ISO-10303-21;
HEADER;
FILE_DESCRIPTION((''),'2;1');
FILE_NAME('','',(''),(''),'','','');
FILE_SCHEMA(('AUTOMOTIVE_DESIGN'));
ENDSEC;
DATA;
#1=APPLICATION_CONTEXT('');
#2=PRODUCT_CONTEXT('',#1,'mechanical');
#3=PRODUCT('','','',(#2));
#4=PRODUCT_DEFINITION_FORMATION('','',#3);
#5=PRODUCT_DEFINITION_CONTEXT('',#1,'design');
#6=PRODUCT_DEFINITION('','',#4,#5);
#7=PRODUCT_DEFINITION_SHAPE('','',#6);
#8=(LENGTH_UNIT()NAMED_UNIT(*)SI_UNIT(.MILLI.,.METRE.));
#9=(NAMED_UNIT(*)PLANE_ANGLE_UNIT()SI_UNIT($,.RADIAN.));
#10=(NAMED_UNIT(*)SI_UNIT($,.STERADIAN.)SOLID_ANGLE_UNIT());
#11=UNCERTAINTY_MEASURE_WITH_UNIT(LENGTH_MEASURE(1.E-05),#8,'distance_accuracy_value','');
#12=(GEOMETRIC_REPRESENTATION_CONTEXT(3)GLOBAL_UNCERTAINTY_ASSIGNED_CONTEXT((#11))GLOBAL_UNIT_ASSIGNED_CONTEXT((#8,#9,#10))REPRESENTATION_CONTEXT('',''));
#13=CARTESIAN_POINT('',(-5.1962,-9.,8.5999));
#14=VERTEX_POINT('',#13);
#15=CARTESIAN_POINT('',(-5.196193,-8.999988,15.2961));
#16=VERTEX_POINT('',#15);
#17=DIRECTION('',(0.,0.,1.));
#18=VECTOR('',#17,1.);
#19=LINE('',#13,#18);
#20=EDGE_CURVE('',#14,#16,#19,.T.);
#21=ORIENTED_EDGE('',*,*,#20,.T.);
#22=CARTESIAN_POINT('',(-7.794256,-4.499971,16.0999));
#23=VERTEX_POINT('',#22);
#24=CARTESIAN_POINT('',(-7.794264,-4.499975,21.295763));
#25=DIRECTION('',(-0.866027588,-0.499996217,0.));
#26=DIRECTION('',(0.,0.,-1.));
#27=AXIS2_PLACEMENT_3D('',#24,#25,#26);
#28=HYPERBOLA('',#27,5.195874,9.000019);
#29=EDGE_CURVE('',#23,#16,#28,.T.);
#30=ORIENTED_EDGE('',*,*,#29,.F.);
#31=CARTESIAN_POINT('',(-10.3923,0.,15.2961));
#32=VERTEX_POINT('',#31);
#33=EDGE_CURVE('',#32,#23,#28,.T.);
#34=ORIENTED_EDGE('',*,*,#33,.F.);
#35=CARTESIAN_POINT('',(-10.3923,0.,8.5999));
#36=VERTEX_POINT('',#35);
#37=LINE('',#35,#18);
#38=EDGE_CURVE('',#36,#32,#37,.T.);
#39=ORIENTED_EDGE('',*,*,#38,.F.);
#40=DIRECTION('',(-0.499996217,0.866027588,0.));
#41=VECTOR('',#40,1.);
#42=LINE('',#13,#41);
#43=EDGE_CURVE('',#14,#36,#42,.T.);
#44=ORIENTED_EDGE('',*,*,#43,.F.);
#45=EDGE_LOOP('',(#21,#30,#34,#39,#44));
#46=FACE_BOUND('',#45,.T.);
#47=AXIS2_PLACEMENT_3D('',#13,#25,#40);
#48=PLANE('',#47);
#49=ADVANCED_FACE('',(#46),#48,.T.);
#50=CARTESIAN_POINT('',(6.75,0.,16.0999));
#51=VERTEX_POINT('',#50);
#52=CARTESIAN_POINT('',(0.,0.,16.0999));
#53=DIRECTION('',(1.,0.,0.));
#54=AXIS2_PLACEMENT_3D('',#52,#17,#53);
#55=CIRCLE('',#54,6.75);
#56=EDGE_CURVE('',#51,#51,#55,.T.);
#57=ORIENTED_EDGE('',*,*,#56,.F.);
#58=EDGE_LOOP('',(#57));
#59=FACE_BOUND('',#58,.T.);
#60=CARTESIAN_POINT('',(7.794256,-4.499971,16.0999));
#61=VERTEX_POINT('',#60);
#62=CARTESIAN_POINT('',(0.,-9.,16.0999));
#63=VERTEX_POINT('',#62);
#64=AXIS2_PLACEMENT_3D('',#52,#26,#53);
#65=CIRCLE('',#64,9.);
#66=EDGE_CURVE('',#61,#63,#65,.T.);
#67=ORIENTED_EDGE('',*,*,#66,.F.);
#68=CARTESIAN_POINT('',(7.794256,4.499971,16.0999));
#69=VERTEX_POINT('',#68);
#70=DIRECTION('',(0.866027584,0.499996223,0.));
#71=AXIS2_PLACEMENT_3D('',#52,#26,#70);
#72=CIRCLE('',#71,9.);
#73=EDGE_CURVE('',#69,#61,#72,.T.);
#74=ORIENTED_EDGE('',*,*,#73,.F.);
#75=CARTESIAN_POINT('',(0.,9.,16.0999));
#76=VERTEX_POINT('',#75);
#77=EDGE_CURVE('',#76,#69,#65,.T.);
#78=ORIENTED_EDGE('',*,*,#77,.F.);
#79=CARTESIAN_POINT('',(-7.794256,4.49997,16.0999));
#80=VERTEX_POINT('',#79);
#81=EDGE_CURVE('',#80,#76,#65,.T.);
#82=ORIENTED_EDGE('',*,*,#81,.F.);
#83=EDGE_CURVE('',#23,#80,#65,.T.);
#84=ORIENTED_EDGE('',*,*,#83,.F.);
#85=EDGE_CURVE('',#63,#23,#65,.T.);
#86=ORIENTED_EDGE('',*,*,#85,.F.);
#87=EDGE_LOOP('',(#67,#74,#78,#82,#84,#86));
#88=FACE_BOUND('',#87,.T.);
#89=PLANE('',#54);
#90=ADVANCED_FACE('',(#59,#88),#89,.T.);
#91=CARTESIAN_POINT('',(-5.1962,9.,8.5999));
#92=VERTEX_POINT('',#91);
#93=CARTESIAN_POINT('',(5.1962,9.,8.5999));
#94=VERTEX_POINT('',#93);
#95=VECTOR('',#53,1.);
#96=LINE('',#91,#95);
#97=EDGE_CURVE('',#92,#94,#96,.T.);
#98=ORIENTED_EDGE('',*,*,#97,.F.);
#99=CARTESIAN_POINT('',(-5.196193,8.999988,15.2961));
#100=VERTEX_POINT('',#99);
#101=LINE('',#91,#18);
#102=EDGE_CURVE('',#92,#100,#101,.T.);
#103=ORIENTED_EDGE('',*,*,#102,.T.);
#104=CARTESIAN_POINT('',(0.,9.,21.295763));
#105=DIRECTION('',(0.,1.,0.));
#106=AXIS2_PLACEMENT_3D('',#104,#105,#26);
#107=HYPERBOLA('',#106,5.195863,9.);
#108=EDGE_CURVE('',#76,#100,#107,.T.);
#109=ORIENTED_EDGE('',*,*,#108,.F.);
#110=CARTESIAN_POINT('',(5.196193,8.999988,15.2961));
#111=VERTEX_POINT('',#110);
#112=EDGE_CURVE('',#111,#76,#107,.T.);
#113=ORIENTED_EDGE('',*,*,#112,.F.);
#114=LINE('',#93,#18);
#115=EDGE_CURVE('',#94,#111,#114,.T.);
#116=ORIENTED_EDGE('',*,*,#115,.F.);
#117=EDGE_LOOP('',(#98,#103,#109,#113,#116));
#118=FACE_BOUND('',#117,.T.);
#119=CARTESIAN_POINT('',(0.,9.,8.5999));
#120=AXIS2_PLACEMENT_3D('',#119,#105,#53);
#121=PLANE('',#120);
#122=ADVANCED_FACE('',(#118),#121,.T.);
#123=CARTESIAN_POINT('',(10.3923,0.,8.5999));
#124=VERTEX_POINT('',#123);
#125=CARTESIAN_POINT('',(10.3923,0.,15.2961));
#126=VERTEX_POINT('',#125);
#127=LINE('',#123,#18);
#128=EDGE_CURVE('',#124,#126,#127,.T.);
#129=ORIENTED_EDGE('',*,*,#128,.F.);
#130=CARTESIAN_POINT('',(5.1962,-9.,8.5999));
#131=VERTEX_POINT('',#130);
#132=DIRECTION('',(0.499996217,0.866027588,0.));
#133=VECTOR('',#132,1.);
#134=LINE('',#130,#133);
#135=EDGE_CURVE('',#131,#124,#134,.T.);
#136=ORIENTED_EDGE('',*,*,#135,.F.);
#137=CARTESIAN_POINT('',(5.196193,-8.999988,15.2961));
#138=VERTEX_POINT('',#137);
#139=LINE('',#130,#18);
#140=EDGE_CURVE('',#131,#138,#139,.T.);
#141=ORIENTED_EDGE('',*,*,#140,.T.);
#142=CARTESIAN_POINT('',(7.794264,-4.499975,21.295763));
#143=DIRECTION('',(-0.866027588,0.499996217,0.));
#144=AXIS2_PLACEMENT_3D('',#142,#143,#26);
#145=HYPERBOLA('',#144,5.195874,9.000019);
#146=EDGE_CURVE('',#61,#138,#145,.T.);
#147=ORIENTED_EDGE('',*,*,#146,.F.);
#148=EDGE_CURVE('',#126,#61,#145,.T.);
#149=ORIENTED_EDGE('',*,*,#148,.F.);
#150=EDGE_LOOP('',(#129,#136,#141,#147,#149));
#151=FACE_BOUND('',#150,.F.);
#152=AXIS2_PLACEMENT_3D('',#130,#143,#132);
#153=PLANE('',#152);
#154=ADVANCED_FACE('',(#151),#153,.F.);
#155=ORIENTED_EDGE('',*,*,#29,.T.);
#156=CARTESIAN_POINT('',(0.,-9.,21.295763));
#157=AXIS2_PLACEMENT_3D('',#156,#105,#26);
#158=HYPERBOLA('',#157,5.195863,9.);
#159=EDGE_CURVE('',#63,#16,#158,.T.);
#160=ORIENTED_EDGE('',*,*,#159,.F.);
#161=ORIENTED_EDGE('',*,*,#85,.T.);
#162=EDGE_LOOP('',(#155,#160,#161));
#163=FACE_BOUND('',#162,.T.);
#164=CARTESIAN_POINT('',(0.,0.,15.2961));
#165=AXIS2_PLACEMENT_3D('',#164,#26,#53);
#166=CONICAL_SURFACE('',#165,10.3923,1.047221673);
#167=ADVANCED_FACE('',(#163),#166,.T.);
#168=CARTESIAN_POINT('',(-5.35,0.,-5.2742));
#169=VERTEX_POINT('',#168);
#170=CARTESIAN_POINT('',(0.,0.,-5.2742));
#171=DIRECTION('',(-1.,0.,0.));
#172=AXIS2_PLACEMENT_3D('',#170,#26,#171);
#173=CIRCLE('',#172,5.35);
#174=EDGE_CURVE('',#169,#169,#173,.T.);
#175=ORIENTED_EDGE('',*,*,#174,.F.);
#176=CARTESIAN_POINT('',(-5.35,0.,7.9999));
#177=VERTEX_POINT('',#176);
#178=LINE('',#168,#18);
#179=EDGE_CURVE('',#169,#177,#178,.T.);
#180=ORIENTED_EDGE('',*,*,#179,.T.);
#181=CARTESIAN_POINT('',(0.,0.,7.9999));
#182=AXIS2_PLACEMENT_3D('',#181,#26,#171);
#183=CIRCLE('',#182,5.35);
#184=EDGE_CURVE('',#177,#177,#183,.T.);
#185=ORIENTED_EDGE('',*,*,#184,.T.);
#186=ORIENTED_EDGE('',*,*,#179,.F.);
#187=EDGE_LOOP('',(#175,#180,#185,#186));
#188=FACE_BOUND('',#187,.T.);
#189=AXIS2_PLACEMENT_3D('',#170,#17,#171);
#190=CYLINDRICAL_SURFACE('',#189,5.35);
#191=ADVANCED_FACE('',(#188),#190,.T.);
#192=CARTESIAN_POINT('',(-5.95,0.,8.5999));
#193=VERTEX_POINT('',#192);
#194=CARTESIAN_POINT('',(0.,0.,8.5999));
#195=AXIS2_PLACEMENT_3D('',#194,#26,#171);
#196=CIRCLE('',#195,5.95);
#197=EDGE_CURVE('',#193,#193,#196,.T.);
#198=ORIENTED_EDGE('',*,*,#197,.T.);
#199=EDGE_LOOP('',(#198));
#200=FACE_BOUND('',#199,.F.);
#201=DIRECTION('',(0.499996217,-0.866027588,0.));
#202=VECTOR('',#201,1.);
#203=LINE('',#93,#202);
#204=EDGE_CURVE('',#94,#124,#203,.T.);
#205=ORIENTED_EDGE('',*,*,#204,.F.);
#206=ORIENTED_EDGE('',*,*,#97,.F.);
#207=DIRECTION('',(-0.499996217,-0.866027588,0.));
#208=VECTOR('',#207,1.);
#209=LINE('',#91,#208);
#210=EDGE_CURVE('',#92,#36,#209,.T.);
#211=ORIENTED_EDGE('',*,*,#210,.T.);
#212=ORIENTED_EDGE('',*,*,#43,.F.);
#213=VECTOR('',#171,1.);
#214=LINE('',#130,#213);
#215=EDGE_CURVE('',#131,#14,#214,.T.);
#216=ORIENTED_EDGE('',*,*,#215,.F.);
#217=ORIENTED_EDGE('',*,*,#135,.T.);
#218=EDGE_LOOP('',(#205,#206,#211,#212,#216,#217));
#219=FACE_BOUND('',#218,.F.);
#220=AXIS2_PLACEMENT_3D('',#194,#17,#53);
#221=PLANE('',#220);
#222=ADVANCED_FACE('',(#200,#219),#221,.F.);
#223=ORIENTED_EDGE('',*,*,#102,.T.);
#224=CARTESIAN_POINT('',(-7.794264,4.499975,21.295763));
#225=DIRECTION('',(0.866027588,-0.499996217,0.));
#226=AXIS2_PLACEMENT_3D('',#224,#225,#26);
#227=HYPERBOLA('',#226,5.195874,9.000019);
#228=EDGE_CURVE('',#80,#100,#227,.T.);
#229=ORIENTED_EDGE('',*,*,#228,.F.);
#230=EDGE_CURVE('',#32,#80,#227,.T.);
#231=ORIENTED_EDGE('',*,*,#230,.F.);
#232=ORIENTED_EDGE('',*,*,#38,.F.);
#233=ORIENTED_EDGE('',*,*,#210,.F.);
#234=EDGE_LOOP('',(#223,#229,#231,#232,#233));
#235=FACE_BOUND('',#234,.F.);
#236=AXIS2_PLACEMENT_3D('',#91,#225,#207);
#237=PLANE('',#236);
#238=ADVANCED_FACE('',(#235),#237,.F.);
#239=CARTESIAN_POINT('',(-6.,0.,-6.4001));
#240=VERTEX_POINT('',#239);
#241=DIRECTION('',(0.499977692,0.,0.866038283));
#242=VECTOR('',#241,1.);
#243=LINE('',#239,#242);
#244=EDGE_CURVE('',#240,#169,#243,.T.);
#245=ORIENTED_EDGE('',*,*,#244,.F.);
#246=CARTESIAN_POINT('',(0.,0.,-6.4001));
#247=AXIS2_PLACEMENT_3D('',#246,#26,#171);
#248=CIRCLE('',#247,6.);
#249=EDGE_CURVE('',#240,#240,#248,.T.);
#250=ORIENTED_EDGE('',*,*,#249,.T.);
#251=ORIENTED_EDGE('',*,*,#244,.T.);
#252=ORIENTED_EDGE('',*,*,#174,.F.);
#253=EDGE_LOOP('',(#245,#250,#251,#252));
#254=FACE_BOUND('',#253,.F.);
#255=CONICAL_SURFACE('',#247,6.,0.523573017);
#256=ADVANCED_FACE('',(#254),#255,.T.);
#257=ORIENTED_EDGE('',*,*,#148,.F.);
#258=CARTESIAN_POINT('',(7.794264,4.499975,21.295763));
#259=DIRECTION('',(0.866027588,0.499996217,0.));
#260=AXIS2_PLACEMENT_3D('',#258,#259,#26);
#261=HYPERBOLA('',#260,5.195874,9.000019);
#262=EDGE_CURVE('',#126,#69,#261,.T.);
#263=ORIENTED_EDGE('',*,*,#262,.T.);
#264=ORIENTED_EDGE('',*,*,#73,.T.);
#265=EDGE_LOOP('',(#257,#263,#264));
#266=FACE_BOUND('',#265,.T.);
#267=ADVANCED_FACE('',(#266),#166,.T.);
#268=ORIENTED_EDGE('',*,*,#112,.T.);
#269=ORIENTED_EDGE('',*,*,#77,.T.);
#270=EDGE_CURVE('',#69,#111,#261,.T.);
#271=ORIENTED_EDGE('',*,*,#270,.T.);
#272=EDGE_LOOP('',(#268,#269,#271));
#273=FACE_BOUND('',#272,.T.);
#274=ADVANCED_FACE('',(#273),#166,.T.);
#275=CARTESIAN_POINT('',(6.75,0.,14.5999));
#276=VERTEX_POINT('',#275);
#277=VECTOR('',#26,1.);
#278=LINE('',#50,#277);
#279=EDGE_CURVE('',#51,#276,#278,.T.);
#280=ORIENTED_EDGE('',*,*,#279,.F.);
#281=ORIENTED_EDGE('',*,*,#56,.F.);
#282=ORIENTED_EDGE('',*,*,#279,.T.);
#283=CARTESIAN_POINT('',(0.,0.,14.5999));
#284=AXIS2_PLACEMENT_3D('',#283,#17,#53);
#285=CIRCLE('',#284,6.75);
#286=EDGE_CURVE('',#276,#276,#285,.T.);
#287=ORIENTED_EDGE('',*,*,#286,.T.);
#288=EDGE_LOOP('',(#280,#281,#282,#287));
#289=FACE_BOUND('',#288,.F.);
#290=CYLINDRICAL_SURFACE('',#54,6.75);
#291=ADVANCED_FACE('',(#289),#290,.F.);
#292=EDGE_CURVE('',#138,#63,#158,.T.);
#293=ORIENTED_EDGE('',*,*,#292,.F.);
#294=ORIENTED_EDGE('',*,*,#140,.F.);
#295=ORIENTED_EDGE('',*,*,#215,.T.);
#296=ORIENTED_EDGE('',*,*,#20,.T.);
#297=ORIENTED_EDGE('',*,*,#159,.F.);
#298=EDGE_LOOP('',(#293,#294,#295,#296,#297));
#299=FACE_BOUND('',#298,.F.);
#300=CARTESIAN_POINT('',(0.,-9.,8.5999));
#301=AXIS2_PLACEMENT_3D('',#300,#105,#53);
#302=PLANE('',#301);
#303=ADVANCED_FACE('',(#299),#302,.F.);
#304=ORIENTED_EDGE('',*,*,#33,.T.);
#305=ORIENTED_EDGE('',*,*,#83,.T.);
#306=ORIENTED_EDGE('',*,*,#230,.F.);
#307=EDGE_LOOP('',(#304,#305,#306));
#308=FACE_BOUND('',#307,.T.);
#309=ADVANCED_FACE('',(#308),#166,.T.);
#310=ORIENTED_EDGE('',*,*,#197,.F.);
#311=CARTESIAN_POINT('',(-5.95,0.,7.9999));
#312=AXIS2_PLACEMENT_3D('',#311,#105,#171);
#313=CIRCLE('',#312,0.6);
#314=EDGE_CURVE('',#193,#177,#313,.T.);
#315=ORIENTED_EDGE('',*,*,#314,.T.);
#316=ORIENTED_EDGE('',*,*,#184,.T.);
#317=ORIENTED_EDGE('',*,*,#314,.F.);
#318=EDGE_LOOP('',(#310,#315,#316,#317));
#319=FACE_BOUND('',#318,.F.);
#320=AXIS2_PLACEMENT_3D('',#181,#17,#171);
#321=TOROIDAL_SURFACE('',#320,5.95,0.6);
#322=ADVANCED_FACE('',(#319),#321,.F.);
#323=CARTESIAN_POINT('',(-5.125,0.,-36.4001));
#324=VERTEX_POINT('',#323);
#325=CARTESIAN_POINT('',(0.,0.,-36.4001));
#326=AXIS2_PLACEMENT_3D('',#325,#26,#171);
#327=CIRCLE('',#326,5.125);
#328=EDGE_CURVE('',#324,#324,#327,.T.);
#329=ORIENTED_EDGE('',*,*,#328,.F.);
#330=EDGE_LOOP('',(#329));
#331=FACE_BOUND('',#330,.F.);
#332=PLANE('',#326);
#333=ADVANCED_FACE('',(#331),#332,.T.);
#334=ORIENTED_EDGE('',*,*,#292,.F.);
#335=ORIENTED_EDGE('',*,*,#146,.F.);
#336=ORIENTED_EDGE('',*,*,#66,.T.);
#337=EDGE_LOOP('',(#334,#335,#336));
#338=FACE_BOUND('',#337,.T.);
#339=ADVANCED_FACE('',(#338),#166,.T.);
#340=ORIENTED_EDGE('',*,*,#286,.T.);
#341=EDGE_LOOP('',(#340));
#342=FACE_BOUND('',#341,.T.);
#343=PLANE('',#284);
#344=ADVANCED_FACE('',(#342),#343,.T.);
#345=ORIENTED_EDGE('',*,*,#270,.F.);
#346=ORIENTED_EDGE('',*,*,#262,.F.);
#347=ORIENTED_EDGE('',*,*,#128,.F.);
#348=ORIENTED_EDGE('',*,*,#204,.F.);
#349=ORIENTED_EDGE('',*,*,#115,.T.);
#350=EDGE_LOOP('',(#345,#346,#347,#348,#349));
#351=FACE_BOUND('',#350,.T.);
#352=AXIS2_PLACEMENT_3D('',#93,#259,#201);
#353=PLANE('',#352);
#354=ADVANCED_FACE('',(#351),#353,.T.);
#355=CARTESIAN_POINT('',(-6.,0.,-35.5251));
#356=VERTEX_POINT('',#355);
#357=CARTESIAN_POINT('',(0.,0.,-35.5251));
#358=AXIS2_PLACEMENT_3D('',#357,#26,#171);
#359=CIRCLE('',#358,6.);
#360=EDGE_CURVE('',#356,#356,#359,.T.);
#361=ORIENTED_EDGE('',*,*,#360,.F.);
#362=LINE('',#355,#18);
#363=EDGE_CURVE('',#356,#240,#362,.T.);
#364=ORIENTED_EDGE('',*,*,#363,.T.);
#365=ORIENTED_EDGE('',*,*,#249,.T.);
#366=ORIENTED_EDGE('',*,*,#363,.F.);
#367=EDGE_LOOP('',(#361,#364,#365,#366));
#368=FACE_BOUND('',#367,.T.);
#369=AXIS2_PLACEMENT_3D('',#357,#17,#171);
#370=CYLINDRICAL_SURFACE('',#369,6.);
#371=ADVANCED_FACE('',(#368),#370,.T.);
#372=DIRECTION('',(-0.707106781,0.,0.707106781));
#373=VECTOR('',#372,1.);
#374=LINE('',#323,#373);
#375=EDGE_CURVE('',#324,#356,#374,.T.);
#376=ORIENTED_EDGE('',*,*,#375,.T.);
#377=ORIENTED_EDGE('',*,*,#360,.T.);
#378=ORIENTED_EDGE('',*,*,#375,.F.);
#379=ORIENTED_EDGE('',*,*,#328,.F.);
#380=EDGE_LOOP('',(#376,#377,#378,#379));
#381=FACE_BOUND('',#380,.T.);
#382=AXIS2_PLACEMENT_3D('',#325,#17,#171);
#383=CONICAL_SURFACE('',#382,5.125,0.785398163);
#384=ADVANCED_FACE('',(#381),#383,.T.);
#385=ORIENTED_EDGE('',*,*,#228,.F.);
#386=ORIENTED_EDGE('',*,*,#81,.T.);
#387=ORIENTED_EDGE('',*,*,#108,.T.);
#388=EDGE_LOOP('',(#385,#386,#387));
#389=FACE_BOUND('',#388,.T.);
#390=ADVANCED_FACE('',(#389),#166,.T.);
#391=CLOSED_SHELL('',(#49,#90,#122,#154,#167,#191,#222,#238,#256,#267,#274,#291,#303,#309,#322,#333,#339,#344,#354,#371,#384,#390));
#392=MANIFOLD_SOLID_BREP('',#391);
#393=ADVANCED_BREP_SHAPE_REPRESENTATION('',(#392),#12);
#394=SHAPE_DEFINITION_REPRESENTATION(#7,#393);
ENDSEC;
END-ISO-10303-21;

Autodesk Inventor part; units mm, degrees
ref_plane "YZ Plane" through (0, 0, 0) normal (1, 0, 0) x (0, 1, 0)
sketch "Sketch2" plane through (0, 0, 0) normal (0, 1, 0) x (-1, 0, 0)
  line L0 (0, 8.5999) -> (0, -36.4001)
  line L1 (0, -36.4001) -> (5.125, -36.4001)
  line L2 (6, -35.5251) -> (6, -6.4001)
  line L3 (6, -6.4001) -> (5.35, -5.2742)
  line L4 (5.35, -5.2742) -> (5.35, 8.5999)
  line L5 (5.35, 8.5999) -> (0, 8.5999)
  line L6 (5.125, -36.4001) -> (6, -35.5251)
  line L7 (6, -36.4001) -> (6, -37.6375)
  line L8 (0, -46.885) -> (0, 17.8474) projected
  dimension "Ds" = 10.7
  dimension "NND" = 12
  dimension "b" = 30
  dimension "d3" = 30
  dimension "d5" = 45
  dimension "PTC" = 1.75
  dimension "NLG" = 45
revolve "Revolution1" add sketch "Sketch2" angle 360 about axis through (0, 0, 8.5999) along (0, 0, -1)
sketch "Sketch3" plane through (0, 0, 8.5999) normal (0, 0, 1) x (1, 0, 0)
  circle A0 centre (0, 0) radius 5.35 projected
  line L0 (0, 9) -> (5.1962, 9)
  line L1 (5.1962, 9) -> (10.3923, 0)
  line L2 (10.3923, 0) -> (0, 0)
  line L3 (0, 0) -> (0, 9)
  line L4 (0, 9) -> (-5.1962, 9)
  line L5 (-5.1962, 9) -> (-10.3923, 0)
  line L6 (0, -9) -> (5.1962, -9)
  line L7 (5.1962, -9) -> (10.3923, 0)
  line L8 (-5.1962, -9) -> (-10.3923, 0)
  line L9 (0, -9) -> (-5.1962, -9)
  dimension "d9" = 60
  dimension "ParS" = 18
  dimension "msp_d11" = 18
extrude "Extrusion1" add sketch "Sketch3" along normal blind 7.5
sketch "Sketch4" plane through (0, 0, 0) normal (0, 1, 0) x (-1, 0, 0)
  line L0 (-9, 16.0999) -> (-10.3923, 16.0999)
  line L1 (-10.3923, 16.0999) -> (-10.3923, 15.2961)
  line L2 (-10.3923, 15.2961) -> (-9, 16.0999)
  line L3 (0, 4.7234) -> (0, 31.8591) projected
  line L4 (0, 27.9826) -> (0, 27.1787)
  line L5 (-10.3923, 8.5999) -> (-10.3923, 16.0999) projected
  line L6 (-5.1962, 16.0999) -> (-10.3923, 16.0999) projected
  dimension "d14" = 30
  dimension "msp_d15" = 18
revolve "Revolution2" cut sketch "Sketch4" angle 360 about axis through (0, 0, 27.9826) along (0, 0, -1)
sketch "Sketch5" plane through (0, 0, 16.0999) normal (0, 0, 1) x (1, 0, 0)
  arc A0 (7.7942, 4.5) -> (0, 9) centre (0, 0) ccw projected
  circle A1 centre (0, 0) radius 6.75
  dimension "d27" = 13.5
extrude "Extrusion2" cut sketch "Sketch5" against normal blind 1.5
thread "Thread1" size "M12x1.75" class "6g" standard "ISO Metric profile" full length
ref_plane "MSC_PF1" through (0, 0, 0) normal (0, 1, 0) x (-1, 0, 0)
ref_plane "MSC_PT1" through (0, 0, 8.5999) normal (0, 0, -1) x (-1, 0, 0)
fillet "Fillet1" radius 0.6 1 edges at (5.35, 0, 8.5999)
equation "\"msp_d11\" = ParS"
equation "\"msp_d15\" = ParS"
equation "\"d27\" = 0.75 * ParS"
equation "\"d28\" = 0.2 * ParK"
equation "\"d30\" = r"
equation "\"msp_d17\" = b"
equation "\"r\" = 0.6"
equation "\"THREADDIA\" = NND"
equation "\"ParK\" = 7.5"
properties part number "DIN EN ISO 4015 - M12x45" material "Stainless Steel, 440C"
